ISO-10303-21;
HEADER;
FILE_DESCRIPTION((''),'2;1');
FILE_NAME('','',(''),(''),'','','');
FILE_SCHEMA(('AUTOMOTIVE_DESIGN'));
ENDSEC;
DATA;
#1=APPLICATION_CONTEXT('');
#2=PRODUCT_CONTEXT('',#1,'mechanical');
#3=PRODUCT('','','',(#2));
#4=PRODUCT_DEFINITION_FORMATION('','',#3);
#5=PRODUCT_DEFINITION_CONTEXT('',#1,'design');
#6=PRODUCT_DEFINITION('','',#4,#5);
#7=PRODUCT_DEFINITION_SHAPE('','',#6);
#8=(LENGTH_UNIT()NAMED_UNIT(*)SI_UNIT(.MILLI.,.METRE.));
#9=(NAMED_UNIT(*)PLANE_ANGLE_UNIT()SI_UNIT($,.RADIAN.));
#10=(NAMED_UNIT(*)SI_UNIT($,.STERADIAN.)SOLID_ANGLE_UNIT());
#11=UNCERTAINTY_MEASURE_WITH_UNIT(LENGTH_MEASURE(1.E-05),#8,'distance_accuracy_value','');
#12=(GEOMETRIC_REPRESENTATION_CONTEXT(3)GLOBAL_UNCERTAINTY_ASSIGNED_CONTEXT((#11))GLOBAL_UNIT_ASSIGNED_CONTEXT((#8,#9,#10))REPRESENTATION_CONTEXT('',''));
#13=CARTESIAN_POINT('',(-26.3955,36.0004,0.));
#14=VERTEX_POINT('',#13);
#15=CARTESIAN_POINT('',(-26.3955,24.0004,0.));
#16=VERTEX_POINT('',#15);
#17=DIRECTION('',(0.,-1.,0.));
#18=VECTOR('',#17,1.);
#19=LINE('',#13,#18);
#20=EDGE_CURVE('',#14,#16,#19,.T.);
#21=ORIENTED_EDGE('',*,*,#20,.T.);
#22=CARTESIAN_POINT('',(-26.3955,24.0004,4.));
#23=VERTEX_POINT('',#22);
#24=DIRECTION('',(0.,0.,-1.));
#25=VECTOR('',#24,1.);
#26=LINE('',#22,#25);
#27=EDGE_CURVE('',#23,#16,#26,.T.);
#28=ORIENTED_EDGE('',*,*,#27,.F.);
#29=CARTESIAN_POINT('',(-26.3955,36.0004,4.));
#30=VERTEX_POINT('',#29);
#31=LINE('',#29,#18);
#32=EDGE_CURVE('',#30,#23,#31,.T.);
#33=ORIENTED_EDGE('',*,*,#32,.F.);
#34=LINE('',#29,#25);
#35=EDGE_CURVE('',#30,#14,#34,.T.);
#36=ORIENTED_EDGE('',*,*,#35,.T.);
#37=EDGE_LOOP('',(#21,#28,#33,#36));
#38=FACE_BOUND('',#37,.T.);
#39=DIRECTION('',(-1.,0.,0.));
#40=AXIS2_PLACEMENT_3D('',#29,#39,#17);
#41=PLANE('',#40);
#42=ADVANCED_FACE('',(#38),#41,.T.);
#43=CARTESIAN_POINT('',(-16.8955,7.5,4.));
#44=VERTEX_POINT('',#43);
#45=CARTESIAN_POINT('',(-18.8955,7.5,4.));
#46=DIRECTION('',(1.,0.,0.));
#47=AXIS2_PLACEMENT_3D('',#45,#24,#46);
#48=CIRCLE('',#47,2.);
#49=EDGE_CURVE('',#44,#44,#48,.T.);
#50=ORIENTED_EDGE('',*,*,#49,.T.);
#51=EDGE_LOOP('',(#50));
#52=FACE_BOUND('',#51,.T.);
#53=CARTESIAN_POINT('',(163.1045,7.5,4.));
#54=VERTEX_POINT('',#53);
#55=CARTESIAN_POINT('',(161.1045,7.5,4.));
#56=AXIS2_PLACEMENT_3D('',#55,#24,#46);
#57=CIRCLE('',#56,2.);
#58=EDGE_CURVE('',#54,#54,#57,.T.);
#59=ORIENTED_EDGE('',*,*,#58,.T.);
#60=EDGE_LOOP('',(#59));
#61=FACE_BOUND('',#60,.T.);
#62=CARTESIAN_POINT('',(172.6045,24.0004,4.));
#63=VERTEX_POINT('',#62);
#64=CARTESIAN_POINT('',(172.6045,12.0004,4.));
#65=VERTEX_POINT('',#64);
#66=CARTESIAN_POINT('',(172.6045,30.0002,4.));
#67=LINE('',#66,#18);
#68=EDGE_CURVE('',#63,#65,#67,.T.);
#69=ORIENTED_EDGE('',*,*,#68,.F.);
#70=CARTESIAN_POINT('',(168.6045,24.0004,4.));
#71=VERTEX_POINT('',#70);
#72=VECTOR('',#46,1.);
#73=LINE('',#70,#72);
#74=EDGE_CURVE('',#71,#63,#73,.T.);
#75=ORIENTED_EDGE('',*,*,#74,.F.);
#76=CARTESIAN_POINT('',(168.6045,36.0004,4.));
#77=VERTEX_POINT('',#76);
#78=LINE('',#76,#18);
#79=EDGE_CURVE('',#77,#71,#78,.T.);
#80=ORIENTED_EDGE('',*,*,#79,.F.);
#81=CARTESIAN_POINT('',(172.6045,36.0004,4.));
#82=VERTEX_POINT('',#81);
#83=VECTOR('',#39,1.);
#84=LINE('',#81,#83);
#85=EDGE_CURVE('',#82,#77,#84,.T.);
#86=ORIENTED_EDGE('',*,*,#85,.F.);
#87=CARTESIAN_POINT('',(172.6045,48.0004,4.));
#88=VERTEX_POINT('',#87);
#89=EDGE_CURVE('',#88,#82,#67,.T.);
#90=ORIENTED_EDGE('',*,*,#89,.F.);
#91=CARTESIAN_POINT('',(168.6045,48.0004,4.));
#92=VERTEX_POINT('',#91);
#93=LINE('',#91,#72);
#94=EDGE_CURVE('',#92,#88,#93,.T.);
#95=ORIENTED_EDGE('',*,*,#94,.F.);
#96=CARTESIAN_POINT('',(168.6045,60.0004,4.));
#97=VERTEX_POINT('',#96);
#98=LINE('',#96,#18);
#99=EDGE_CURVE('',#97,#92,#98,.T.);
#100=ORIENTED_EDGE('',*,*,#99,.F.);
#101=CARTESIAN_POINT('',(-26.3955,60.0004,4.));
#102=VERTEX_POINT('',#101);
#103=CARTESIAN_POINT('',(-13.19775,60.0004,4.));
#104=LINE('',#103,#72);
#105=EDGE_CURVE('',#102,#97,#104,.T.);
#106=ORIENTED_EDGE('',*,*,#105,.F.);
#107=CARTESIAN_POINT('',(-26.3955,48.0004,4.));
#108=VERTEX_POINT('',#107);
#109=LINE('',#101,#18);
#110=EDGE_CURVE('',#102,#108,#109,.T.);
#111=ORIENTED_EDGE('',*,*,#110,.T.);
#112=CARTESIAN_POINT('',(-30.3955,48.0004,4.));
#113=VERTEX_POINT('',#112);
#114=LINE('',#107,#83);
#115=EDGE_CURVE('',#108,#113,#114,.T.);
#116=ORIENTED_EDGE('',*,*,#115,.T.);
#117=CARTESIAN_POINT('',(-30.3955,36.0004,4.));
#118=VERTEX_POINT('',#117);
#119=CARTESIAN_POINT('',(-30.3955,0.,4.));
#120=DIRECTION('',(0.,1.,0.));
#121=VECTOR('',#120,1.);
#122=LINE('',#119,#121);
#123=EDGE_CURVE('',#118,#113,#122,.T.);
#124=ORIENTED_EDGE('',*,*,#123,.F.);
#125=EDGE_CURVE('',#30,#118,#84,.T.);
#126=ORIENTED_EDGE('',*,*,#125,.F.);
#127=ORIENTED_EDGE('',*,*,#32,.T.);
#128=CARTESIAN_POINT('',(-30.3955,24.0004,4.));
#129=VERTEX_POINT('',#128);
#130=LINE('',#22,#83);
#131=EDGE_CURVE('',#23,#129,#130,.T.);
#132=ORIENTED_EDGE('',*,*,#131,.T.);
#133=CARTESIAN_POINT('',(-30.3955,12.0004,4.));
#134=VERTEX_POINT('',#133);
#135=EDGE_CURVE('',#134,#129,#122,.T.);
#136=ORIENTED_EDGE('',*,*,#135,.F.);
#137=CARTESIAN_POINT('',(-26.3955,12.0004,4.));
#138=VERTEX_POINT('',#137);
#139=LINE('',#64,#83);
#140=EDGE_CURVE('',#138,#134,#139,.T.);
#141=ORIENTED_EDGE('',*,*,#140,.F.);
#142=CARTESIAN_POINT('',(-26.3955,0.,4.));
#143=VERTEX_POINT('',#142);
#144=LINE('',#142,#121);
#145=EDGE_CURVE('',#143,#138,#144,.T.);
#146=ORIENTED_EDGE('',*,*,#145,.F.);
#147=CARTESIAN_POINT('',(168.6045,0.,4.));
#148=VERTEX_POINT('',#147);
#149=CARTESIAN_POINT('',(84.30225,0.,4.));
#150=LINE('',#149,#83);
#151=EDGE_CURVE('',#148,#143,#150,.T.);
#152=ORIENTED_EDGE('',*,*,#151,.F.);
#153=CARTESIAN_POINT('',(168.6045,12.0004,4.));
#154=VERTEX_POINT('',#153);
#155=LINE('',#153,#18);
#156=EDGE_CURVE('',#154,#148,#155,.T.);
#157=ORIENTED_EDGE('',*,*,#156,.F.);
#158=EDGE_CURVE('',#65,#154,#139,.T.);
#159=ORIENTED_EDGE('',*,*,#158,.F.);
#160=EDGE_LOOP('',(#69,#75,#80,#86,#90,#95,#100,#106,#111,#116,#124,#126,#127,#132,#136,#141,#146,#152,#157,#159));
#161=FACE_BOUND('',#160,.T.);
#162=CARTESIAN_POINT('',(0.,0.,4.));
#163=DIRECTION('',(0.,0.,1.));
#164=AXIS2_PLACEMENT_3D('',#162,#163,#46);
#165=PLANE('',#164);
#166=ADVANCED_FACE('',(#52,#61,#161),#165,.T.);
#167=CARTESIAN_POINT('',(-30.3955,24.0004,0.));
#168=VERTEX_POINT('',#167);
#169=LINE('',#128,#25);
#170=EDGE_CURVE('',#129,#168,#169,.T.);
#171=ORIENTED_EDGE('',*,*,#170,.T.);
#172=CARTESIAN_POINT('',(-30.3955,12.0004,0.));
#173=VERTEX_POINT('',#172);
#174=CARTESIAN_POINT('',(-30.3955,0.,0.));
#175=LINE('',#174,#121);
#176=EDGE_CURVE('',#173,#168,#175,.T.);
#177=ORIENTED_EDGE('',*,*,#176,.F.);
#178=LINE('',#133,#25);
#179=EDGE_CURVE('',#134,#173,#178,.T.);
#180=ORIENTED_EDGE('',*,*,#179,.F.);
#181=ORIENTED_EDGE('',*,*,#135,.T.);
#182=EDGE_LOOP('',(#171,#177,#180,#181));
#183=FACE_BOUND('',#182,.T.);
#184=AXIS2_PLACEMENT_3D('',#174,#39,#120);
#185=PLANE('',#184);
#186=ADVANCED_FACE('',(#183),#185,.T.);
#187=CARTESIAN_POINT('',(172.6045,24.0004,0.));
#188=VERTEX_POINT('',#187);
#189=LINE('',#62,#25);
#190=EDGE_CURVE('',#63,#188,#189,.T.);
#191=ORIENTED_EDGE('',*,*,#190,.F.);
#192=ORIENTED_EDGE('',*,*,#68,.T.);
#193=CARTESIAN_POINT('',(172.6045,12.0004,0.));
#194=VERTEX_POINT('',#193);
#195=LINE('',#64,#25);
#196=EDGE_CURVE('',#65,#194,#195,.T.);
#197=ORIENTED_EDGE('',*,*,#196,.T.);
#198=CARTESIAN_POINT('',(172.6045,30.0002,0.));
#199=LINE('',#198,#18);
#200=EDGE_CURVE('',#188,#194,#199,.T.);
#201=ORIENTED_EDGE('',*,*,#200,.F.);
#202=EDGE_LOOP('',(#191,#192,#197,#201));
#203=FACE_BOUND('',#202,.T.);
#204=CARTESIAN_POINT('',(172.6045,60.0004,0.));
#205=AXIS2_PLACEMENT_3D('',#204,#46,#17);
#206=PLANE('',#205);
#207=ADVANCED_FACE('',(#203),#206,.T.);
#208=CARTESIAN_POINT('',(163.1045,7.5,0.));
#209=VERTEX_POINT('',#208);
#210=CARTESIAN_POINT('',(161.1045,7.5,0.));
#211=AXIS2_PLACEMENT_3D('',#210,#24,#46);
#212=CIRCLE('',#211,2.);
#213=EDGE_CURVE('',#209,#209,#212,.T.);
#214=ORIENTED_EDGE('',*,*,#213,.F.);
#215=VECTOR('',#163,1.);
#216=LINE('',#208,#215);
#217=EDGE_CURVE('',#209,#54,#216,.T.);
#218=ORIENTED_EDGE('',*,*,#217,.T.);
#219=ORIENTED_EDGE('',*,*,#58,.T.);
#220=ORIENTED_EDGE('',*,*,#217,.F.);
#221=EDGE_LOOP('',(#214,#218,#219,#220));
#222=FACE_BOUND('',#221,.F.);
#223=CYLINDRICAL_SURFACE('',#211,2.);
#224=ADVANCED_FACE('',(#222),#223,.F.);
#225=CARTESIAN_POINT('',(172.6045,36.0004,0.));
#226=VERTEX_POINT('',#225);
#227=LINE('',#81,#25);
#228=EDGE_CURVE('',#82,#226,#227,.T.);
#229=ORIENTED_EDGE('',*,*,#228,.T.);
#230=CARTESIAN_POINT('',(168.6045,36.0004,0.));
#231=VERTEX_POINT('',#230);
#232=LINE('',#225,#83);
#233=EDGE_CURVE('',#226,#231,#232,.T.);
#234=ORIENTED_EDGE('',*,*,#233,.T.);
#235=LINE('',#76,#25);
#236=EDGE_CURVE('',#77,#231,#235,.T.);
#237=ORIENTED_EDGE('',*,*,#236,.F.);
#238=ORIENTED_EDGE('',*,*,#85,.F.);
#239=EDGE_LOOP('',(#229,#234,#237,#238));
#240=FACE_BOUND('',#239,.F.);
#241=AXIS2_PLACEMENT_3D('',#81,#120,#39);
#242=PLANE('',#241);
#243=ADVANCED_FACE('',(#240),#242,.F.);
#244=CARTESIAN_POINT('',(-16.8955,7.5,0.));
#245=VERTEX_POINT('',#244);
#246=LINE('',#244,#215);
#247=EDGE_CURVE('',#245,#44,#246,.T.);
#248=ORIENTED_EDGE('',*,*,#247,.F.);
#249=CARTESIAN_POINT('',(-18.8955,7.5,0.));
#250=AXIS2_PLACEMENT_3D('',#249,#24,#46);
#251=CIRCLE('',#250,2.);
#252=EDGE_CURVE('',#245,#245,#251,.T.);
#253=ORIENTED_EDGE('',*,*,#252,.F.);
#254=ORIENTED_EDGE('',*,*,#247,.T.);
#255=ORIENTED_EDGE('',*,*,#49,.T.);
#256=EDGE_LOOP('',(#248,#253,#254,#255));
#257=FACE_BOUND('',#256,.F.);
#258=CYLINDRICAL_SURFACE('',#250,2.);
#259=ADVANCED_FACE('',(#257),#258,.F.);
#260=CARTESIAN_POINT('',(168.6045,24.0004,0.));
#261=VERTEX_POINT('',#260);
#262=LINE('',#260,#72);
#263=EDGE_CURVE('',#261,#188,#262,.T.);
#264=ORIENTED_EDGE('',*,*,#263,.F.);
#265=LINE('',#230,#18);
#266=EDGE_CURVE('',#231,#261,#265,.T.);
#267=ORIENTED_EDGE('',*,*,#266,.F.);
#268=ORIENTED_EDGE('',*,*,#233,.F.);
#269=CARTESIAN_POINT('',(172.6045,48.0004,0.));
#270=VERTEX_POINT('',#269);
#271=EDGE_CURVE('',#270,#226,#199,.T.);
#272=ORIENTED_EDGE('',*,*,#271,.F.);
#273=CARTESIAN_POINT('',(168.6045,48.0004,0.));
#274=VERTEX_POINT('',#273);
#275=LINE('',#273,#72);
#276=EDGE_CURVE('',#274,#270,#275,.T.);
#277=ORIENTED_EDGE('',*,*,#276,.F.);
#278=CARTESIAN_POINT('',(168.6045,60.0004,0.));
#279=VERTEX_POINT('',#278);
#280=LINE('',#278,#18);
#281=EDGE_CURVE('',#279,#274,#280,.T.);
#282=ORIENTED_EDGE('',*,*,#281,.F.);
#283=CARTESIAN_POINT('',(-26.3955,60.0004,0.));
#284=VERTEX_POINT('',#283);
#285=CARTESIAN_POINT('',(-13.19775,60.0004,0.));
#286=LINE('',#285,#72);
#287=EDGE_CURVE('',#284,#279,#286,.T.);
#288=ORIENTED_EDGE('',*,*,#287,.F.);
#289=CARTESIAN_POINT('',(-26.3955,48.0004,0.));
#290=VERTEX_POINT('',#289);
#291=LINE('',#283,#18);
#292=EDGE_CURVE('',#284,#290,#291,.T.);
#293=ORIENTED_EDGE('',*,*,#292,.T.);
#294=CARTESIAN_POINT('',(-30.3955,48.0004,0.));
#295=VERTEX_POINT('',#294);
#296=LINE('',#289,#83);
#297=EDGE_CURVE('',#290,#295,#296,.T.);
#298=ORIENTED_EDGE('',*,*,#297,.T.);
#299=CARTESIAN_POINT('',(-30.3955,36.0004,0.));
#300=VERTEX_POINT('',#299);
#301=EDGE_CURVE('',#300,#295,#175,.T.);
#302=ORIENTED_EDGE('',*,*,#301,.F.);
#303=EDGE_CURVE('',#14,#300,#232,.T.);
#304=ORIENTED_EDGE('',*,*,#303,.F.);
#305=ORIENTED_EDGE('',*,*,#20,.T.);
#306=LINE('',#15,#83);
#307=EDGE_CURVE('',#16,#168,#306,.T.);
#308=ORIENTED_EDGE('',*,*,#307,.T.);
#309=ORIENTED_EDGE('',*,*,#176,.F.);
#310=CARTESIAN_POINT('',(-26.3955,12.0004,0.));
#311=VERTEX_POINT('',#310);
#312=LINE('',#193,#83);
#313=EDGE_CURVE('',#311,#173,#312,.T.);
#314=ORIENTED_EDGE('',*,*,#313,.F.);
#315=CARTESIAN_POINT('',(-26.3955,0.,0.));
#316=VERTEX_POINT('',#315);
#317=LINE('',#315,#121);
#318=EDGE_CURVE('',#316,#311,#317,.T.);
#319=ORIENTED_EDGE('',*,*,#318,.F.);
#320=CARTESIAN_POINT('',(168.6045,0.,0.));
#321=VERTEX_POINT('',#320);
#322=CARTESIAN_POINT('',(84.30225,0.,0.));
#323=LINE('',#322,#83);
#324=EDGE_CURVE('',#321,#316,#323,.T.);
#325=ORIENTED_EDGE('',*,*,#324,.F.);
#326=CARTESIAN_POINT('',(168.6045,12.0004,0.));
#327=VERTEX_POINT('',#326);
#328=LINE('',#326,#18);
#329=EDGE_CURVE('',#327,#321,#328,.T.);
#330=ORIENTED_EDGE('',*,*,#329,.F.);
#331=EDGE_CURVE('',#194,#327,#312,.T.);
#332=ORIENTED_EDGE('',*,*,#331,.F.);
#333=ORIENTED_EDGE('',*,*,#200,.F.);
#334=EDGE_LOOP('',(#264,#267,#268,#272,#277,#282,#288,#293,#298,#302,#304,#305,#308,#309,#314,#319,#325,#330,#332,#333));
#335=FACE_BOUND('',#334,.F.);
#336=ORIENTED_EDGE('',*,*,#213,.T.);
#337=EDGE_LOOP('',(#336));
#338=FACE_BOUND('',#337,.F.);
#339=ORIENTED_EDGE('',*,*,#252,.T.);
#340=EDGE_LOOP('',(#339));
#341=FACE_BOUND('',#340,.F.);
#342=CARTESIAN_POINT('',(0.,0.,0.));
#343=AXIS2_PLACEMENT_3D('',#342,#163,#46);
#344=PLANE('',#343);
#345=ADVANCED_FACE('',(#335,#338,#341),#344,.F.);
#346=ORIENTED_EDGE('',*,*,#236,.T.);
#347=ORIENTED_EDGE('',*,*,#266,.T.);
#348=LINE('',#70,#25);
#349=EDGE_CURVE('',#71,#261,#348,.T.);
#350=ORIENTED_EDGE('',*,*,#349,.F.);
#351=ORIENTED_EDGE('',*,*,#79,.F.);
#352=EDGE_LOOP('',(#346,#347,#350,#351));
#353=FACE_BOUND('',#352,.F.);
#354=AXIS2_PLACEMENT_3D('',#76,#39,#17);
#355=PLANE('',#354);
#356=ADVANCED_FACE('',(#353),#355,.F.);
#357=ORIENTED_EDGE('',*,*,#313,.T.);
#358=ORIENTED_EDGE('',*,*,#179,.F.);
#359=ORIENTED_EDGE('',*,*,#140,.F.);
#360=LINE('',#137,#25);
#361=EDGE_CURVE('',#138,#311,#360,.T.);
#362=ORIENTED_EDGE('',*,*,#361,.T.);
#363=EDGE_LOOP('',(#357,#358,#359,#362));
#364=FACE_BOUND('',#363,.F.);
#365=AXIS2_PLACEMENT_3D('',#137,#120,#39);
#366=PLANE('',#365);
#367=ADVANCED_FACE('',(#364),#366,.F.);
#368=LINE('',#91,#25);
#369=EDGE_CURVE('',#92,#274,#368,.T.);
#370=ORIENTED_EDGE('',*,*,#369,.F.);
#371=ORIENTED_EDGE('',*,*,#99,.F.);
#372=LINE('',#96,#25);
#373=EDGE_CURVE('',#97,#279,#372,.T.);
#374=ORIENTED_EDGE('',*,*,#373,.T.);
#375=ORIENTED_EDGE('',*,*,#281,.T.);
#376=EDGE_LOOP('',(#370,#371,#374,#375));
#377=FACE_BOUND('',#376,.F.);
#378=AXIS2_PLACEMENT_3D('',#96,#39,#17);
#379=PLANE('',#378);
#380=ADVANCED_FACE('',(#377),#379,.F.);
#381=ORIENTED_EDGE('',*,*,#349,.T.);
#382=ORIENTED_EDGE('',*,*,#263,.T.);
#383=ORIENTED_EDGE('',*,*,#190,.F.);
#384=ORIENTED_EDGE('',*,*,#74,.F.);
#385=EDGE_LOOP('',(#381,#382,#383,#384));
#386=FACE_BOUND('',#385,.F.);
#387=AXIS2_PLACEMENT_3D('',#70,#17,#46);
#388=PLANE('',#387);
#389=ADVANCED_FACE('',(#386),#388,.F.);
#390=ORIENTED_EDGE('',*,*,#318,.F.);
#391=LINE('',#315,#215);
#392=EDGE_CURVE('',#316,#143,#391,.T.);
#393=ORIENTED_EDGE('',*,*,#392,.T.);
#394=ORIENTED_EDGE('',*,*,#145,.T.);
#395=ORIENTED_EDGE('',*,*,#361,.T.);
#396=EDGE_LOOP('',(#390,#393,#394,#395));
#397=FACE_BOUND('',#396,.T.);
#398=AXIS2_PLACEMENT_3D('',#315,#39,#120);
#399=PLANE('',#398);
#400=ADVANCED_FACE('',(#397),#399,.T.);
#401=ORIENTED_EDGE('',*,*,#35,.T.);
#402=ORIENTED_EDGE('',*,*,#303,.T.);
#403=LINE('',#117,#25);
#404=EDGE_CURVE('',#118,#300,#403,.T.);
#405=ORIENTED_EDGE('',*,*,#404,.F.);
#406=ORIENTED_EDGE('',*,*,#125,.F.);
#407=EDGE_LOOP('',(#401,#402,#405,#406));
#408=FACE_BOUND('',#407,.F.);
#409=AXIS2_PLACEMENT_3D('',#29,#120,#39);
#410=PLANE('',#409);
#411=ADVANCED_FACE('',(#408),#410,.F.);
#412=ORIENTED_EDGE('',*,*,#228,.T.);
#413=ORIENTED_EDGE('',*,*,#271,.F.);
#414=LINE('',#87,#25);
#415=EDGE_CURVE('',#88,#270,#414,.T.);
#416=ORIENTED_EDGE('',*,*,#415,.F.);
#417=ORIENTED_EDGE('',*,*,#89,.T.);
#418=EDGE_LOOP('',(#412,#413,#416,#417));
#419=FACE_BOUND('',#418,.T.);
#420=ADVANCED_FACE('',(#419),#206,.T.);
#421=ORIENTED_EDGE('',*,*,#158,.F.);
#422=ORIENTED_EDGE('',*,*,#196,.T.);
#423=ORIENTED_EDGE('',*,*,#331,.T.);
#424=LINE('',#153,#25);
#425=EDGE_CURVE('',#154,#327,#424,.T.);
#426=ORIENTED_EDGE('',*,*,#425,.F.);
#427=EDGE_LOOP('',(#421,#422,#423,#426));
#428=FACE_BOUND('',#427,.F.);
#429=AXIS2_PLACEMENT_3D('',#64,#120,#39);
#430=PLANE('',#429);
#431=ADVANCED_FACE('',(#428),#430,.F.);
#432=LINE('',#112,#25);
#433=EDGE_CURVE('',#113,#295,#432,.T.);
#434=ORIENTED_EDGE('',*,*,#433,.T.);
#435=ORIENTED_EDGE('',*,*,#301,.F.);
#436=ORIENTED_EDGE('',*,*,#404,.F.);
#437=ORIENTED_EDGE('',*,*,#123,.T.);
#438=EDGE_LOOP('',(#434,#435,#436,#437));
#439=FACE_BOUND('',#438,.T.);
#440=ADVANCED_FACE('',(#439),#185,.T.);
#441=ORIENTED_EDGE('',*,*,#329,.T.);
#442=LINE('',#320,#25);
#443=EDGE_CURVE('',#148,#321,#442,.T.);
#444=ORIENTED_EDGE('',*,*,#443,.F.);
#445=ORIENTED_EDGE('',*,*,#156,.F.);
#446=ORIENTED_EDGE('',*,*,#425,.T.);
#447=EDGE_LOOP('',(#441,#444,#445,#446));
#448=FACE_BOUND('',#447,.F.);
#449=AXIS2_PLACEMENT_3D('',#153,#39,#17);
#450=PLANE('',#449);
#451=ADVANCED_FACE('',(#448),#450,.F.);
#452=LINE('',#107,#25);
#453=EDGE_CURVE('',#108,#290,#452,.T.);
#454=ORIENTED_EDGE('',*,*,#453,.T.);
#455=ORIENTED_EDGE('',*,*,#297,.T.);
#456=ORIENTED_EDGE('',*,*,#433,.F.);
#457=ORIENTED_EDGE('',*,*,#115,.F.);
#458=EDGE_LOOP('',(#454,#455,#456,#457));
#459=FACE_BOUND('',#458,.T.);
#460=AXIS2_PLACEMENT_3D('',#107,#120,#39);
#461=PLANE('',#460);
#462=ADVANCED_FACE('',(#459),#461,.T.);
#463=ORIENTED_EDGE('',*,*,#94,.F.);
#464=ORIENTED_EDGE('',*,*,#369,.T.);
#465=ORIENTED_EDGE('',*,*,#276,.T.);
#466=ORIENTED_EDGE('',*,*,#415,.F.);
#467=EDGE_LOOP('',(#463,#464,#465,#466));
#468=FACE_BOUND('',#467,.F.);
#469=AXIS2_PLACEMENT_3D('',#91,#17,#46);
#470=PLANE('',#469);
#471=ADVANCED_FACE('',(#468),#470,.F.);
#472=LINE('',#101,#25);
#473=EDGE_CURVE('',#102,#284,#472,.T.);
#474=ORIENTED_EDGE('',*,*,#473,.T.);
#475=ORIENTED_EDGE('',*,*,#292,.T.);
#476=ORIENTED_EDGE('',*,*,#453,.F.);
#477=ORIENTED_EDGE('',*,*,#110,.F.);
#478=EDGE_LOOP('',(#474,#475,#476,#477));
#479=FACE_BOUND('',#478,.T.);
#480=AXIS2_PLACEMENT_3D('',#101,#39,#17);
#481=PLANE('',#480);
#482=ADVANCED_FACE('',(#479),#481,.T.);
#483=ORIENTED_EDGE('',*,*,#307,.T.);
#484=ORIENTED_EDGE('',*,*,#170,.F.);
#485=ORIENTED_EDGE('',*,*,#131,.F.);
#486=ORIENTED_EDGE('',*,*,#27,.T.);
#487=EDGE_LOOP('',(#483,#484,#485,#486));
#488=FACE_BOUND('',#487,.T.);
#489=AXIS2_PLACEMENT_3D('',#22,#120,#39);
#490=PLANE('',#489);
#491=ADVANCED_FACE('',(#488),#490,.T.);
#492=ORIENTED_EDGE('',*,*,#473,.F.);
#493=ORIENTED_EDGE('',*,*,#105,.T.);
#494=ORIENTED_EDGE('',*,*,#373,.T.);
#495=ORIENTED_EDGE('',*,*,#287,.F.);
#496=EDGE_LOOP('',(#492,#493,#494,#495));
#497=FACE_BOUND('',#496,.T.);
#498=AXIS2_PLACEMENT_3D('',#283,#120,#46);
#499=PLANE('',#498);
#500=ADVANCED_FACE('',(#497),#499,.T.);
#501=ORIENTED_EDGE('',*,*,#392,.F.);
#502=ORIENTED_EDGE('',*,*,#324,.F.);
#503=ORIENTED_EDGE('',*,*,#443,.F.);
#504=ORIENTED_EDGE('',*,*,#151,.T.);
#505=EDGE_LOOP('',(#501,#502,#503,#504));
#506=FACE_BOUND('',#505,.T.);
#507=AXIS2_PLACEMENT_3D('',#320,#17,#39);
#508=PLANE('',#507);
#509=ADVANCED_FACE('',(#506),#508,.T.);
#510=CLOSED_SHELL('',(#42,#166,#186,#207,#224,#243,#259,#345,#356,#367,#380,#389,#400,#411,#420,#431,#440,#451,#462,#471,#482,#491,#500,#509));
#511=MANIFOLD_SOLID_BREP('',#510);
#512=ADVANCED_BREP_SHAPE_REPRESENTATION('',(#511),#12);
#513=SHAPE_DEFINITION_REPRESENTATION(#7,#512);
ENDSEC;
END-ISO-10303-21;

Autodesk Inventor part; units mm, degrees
ref_plane "YZ Plane" through (0, 0, 0) normal (1, 0, 0) x (0, 1, 0)
ref_plane "XZ Plane" through (0, 0, 0) normal (0, 1, 0) x (-1, 0, 0)
ref_plane "XY Plane" through (0, 0, 0) normal (0, 0, 1) x (1, 0, 0)
sketch "Эскиз1" plane through (0, 0, 0) normal (0, 0, 1) x (1, 0, 0)
  line L0 (-26.3955, 0) -> (-26.3955, 30) projected
  line L1 (168.6045, 0) -> (168.6045, 30) projected
  circle A0 centre (161.1045, 7.5) radius 2 projected
  circle A1 centre (-18.8955, 7.5) radius 2 projected
  line L2 (-26.3955, 60.0004) -> (-30.3955, 60.0004) projected
  line L3 (172.6045, 60.0004) -> (168.6045, 60.0004) projected
  line L4 (-26.3955, 60.0004) -> (168.6045, 60.0004)
  line L5 (168.6045, 60.0004) -> (168.6045, 0)
  line L6 (168.6045, 0) -> (-26.3955, 0)
  line L7 (-26.3955, 0) -> (-26.3955, 60.0004)
  point P0 (0, 0)
extrude "Выдавливание1" add sketch "Эскиз1" along normal blind 4
thicken "Толщина1" operation add thickness 4 both sides no extend neighbours yes toward (1, 0, 0) faces at (168.6045, 10, 1.3333)
thicken "Толщина2" operation add thickness 4 both sides no extend neighbours yes toward (-1, 0, 0) faces at (-26.3955, 40.0003, 2.6667)
sketch "Эскиз2" plane through (0, 0, 4) normal (0, 0, 1) x (1, 0, 0)
  line L0 (172.6045, 60.0004) -> (-30.3955, 60.0004) projected
  line L1 (-30.3955, 60.0004) -> (-26.3955, 60.0004)
  line L2 (-26.3955, 60.0004) -> (-26.3955, 48.0004)
  line L3 (-26.3955, 48.0004) -> (-30.3955, 48.0004)
  line L4 (-30.3955, 48.0004) -> (-30.3955, 60.0004)
  line L5 (172.6045, 60.0004) -> (168.6045, 60.0004)
  line L6 (168.6045, 60.0004) -> (168.6045, 48.0004)
  line L7 (168.6045, 48.0004) -> (172.6045, 48.0004)
  line L8 (172.6045, 48.0004) -> (172.6045, 60.0004)
  point P0 (0, 0)
  dimension "d6" = 4
  dimension "d7" = 12
  dimension "d8" = 4
  dimension "d9" = 12
extrude "Выдавливание2" cut sketch "Эскиз2" against normal blind 4
pattern_linear "Прямоуг.массив1" count 3 spacing 24 along (0, -1, 0) of "Выдавливание2"
thicken "Толщина3" operation add thickness 4 both sides no extend neighbours yes toward (1, 0, 0) faces at (-30.3955, 0.0003, 1.3333) (-29.0622, 0.0004, 2.6667)
thicken "Толщина4" operation add thickness 4 both sides no extend neighbours yes toward (-1, 0, 0) faces at (172.6045, 0.0001, 1.3333) (169.9378, 0.0004, 2.6667)
properties part number "KB33-046-004-014 - Лицевая вертикальня пластина" material "Пластик ПЭТ"
